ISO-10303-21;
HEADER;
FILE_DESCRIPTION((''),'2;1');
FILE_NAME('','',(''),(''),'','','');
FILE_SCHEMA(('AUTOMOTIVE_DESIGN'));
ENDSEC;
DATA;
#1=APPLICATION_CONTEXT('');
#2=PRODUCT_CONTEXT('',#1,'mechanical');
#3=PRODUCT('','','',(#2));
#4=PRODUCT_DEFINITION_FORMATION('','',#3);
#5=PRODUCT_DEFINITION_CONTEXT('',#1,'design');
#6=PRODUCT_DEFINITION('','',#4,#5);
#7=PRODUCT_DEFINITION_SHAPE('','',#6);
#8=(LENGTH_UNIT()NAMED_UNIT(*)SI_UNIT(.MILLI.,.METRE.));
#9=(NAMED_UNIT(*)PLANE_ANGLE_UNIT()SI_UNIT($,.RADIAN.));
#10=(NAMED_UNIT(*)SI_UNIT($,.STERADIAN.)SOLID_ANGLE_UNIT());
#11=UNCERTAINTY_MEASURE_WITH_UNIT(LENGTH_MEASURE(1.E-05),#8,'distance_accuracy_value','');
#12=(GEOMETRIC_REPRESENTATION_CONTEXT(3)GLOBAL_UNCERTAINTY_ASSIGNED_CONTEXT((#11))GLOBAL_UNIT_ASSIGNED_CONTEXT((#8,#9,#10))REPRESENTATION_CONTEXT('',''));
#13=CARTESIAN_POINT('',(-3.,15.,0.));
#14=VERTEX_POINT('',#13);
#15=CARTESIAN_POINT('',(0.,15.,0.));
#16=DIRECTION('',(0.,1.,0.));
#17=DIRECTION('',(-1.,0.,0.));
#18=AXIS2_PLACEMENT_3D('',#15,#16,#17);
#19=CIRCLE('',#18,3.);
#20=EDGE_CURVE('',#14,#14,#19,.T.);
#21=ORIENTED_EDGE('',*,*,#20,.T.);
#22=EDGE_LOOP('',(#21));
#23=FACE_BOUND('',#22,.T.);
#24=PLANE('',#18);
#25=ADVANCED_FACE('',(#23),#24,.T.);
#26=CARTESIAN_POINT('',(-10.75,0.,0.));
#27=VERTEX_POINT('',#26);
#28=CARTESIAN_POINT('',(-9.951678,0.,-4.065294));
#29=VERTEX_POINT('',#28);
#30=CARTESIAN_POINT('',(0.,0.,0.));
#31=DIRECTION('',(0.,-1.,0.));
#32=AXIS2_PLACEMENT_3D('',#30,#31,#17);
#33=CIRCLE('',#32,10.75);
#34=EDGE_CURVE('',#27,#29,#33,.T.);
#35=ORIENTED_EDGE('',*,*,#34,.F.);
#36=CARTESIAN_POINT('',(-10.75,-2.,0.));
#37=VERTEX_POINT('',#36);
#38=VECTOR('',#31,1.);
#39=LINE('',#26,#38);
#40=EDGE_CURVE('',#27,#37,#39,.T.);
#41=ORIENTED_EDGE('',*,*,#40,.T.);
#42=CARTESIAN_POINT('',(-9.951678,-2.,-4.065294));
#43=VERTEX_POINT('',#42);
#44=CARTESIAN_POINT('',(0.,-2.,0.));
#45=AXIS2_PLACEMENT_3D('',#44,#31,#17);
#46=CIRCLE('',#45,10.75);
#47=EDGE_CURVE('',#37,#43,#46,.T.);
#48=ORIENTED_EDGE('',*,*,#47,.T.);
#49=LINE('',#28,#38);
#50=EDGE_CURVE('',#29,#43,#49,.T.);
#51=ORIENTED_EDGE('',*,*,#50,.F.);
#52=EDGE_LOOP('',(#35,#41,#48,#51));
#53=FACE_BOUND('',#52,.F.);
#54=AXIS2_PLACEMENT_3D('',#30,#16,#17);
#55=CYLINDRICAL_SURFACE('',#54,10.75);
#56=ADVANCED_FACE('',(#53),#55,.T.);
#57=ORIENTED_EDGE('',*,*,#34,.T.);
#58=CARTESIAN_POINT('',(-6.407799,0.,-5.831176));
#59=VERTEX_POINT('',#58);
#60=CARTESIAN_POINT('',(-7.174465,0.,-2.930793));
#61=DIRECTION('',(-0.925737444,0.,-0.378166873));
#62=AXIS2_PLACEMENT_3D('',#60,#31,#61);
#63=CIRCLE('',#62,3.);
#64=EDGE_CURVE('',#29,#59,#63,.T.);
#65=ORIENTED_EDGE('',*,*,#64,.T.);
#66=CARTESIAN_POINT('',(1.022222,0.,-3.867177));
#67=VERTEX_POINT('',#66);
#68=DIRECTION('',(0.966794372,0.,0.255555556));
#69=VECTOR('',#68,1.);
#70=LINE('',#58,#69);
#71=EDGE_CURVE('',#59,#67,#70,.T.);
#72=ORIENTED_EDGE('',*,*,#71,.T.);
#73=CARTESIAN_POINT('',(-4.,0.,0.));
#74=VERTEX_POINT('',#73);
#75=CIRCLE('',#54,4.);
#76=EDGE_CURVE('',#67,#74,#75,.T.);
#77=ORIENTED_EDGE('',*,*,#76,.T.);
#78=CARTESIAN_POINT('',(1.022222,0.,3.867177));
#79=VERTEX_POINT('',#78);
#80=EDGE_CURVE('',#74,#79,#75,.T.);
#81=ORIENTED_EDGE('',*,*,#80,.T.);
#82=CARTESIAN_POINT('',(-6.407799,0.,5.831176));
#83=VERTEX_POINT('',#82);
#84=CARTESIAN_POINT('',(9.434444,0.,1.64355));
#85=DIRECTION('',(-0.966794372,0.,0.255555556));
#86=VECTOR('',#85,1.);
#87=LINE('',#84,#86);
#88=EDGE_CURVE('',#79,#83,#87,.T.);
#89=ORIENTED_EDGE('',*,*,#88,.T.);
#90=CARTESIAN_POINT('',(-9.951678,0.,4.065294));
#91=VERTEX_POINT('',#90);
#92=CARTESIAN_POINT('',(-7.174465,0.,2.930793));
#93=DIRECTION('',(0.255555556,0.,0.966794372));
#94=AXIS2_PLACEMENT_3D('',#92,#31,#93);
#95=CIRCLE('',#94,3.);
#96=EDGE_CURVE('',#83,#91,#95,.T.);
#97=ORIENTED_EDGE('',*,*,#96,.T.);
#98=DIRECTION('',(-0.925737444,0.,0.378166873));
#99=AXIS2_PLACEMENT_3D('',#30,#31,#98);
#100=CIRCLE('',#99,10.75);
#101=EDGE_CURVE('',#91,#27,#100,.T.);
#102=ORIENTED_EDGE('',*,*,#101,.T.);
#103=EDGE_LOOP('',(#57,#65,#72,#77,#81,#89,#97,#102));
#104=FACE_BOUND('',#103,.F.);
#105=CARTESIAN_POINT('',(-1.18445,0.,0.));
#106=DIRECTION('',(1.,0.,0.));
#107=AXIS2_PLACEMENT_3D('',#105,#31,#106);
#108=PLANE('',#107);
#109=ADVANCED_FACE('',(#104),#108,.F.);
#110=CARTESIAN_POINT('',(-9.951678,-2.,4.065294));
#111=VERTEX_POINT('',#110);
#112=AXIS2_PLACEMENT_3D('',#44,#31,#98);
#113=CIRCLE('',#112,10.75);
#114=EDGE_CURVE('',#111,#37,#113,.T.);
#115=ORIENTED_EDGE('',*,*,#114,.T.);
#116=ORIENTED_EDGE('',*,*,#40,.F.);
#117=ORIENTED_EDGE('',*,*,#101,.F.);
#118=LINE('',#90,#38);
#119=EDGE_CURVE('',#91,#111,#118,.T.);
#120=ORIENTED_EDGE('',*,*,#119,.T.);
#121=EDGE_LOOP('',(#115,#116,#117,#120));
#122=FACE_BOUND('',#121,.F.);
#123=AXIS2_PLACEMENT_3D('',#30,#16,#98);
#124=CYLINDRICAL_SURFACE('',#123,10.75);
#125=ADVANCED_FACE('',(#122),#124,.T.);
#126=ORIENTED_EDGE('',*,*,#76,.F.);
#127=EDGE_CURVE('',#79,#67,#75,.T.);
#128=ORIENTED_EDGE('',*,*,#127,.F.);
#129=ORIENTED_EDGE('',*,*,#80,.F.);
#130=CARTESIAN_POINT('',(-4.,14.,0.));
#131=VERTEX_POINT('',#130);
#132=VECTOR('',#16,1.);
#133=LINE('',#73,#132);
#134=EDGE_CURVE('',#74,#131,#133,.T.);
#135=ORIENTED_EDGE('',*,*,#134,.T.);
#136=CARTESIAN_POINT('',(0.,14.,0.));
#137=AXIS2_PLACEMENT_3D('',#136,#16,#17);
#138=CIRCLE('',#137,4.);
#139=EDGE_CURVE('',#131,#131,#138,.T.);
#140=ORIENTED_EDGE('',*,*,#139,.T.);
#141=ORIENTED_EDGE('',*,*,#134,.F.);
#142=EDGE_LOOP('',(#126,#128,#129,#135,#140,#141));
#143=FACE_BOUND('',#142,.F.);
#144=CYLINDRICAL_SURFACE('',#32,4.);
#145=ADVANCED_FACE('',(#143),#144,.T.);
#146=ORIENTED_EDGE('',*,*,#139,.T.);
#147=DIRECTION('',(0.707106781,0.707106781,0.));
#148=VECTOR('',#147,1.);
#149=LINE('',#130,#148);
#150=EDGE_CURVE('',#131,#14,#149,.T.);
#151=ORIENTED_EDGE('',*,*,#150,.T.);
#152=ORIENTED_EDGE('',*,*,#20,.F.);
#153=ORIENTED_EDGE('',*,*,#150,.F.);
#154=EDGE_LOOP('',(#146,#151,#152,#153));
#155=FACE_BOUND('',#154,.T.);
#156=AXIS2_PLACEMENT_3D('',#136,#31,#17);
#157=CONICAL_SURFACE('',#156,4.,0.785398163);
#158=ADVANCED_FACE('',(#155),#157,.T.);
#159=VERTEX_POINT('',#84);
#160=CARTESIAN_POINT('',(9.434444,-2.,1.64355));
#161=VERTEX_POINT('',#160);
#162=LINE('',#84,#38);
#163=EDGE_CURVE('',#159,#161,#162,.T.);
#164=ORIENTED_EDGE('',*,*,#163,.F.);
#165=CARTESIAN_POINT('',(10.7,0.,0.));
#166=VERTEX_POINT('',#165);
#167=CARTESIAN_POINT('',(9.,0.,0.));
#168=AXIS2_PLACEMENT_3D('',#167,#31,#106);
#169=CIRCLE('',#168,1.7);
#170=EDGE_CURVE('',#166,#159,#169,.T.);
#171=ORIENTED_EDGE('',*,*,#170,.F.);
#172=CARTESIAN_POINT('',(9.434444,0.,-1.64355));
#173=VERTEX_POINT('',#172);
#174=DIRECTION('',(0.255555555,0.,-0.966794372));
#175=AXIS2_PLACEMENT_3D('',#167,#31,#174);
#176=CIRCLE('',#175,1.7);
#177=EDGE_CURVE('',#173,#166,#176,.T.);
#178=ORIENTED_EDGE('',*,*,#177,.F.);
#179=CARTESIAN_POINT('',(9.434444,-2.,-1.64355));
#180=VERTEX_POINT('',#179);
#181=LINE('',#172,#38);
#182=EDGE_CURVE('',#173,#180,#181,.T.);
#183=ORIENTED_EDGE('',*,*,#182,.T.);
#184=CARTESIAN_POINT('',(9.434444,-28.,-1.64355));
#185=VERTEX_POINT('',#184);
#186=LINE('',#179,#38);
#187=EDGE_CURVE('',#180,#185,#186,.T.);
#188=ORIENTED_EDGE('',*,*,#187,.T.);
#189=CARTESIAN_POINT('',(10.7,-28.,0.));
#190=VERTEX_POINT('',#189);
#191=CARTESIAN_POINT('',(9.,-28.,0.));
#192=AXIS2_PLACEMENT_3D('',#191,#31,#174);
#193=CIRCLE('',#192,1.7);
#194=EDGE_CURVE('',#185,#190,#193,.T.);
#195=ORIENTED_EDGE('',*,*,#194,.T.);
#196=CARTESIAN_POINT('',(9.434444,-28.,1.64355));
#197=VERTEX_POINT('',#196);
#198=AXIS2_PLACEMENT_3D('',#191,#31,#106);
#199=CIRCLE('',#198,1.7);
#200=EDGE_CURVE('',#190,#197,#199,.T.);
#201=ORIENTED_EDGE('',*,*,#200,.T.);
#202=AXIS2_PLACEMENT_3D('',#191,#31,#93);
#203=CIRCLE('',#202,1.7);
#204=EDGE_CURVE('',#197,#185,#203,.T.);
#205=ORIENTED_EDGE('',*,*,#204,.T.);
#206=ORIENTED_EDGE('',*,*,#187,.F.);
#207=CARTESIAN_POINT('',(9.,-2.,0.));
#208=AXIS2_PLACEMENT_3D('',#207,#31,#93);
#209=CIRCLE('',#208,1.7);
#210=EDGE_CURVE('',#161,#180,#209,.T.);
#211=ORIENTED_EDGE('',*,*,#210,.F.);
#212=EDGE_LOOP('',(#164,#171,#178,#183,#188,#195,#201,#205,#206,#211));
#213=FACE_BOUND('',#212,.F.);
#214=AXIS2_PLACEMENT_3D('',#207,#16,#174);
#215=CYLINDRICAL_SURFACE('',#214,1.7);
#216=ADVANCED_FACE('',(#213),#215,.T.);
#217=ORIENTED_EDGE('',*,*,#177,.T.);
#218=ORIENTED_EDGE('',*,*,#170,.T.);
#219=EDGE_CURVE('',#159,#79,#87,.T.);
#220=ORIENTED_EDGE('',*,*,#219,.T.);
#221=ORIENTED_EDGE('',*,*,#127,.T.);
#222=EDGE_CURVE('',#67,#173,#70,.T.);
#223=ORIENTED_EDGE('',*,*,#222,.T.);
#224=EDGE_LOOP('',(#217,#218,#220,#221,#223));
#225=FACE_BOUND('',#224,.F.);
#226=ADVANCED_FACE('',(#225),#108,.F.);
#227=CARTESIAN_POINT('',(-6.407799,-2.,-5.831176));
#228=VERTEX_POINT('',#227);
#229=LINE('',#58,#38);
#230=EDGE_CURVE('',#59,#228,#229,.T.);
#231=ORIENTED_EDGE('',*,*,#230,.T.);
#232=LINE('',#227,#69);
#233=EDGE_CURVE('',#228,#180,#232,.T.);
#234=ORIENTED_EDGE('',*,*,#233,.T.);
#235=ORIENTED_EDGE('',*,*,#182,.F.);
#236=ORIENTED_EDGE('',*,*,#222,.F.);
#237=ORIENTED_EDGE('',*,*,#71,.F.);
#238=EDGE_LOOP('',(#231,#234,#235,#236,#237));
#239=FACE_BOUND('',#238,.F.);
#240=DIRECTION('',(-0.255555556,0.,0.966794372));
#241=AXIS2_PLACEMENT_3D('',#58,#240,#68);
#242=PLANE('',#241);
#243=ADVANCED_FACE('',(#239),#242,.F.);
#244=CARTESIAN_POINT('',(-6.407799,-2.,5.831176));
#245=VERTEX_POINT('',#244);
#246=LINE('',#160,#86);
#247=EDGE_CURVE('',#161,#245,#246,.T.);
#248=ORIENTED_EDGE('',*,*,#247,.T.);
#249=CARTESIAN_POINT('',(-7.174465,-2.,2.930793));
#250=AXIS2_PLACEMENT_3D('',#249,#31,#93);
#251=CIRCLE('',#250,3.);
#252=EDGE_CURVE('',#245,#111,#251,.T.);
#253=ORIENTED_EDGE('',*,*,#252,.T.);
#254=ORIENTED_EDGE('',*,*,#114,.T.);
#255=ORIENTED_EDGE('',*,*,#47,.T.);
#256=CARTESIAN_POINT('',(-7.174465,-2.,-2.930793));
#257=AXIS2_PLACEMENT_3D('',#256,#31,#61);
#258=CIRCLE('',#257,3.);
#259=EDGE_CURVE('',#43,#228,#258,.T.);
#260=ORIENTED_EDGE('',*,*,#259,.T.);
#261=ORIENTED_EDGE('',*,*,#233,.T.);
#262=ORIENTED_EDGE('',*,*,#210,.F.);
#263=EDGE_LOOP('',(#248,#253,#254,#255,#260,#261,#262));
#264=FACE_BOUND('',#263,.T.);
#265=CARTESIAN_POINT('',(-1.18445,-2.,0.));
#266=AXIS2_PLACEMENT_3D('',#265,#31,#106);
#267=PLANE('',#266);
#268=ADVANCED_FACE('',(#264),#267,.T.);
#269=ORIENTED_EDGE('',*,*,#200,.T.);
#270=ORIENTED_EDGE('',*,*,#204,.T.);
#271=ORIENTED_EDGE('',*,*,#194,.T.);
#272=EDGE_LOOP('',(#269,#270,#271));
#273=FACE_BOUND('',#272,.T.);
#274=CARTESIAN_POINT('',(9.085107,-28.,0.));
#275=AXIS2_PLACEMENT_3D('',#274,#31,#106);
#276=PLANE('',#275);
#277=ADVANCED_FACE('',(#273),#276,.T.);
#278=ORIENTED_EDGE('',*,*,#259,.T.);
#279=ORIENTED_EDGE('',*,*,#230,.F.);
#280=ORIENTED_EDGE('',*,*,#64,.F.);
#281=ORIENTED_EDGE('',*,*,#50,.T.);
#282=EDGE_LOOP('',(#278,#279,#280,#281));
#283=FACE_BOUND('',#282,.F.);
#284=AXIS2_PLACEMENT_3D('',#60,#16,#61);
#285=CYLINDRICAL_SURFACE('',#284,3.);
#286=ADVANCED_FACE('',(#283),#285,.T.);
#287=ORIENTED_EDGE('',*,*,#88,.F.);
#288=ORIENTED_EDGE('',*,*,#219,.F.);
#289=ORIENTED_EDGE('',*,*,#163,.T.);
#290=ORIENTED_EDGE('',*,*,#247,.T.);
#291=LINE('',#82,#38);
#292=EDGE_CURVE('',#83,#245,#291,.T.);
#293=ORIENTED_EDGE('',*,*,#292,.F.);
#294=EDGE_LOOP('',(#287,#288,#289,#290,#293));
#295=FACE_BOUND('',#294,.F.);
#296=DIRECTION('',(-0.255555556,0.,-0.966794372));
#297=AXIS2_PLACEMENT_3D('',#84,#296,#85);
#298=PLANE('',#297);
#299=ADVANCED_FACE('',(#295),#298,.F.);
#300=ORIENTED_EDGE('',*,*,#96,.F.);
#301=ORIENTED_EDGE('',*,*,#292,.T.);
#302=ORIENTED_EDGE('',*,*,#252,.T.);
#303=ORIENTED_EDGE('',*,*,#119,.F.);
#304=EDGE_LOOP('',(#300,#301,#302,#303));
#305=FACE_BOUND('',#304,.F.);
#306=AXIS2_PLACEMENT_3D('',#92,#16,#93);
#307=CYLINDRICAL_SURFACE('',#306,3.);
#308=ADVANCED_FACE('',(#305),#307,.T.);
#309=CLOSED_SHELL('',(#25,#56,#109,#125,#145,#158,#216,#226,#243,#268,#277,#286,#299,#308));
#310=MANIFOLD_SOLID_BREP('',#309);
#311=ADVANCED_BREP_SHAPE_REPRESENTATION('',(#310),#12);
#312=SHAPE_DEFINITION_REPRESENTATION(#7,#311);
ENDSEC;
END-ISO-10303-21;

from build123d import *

# Parameters (mm, degrees)
F1_DEPTH = 2
F3_DEPTH = 26
F4_R     = 4
F5_DEPTH = 15
F6_SIZE  = 1


with BuildPart() as f1:
    # F0 (on Front) → F1 (new body)
    with BuildSketch(Plane.XZ):
        with BuildLine():
            ThreePointArc((9.4344444444, -1.6435504327), (10.3469512901, -1.0371702957), (10.7, 0))
            ThreePointArc((10.7, 0), (10.3469512901, 1.0371702957), (9.4344444444, 1.6435504327))
            Line((9.4344444444, 1.6435504327), (-6.407798527, 5.8311763854))
            ThreePointArc((-6.407798527, 5.8311763854), (-8.5124333236, 5.6159080306), (-9.9516775266, 4.0652938892))
            ThreePointArc((-9.9516775266, 4.0652938892), (-10.5485314952, 2.0714688736), (-10.75, 0))
            ThreePointArc((-10.75, 0), (-10.5485314952, -2.0714688736), (-9.9516775266, -4.0652938892))
            ThreePointArc((-9.9516775266, -4.0652938892), (-8.5124333236, -5.6159080306), (-6.407798527, -5.8311763854))
            Line((-6.407798527, -5.8311763854), (9.4344444444, -1.6435504327))
        make_face()
    extrude(amount=F1_DEPTH)

    # F2 (on face) → F3 (join)
    with BuildSketch(Plane.XZ.offset(2)):
        with BuildLine():
            ThreePointArc((9.4344444444, -1.6435504327), (10.3469512901, -1.0371702957), (10.7, 0))
            ThreePointArc((10.7, 0), (10.3469512901, 1.0371702957), (9.4344444444, 1.6435504327))
            ThreePointArc((9.4344444444, 1.6435504327), (7.3, 0), (9.4344444444, -1.6435504327))
        make_face()
    extrude(amount=F3_DEPTH)

    # F4 (on face) → F5 (join)
    with BuildSketch(Plane(origin=(0, 0, 0), x_dir=(-1, 0, 0), z_dir=(0, 1, 0))):
        Circle(F4_R)
    extrude(amount=F5_DEPTH)

    # F6
    f6_edges = [f1.edges().sort_by_distance(p)[0] for p in [
        (4, 15, 0),
    ]]
    chamfer(f6_edges, length=F6_SIZE)


solid = f1.part
